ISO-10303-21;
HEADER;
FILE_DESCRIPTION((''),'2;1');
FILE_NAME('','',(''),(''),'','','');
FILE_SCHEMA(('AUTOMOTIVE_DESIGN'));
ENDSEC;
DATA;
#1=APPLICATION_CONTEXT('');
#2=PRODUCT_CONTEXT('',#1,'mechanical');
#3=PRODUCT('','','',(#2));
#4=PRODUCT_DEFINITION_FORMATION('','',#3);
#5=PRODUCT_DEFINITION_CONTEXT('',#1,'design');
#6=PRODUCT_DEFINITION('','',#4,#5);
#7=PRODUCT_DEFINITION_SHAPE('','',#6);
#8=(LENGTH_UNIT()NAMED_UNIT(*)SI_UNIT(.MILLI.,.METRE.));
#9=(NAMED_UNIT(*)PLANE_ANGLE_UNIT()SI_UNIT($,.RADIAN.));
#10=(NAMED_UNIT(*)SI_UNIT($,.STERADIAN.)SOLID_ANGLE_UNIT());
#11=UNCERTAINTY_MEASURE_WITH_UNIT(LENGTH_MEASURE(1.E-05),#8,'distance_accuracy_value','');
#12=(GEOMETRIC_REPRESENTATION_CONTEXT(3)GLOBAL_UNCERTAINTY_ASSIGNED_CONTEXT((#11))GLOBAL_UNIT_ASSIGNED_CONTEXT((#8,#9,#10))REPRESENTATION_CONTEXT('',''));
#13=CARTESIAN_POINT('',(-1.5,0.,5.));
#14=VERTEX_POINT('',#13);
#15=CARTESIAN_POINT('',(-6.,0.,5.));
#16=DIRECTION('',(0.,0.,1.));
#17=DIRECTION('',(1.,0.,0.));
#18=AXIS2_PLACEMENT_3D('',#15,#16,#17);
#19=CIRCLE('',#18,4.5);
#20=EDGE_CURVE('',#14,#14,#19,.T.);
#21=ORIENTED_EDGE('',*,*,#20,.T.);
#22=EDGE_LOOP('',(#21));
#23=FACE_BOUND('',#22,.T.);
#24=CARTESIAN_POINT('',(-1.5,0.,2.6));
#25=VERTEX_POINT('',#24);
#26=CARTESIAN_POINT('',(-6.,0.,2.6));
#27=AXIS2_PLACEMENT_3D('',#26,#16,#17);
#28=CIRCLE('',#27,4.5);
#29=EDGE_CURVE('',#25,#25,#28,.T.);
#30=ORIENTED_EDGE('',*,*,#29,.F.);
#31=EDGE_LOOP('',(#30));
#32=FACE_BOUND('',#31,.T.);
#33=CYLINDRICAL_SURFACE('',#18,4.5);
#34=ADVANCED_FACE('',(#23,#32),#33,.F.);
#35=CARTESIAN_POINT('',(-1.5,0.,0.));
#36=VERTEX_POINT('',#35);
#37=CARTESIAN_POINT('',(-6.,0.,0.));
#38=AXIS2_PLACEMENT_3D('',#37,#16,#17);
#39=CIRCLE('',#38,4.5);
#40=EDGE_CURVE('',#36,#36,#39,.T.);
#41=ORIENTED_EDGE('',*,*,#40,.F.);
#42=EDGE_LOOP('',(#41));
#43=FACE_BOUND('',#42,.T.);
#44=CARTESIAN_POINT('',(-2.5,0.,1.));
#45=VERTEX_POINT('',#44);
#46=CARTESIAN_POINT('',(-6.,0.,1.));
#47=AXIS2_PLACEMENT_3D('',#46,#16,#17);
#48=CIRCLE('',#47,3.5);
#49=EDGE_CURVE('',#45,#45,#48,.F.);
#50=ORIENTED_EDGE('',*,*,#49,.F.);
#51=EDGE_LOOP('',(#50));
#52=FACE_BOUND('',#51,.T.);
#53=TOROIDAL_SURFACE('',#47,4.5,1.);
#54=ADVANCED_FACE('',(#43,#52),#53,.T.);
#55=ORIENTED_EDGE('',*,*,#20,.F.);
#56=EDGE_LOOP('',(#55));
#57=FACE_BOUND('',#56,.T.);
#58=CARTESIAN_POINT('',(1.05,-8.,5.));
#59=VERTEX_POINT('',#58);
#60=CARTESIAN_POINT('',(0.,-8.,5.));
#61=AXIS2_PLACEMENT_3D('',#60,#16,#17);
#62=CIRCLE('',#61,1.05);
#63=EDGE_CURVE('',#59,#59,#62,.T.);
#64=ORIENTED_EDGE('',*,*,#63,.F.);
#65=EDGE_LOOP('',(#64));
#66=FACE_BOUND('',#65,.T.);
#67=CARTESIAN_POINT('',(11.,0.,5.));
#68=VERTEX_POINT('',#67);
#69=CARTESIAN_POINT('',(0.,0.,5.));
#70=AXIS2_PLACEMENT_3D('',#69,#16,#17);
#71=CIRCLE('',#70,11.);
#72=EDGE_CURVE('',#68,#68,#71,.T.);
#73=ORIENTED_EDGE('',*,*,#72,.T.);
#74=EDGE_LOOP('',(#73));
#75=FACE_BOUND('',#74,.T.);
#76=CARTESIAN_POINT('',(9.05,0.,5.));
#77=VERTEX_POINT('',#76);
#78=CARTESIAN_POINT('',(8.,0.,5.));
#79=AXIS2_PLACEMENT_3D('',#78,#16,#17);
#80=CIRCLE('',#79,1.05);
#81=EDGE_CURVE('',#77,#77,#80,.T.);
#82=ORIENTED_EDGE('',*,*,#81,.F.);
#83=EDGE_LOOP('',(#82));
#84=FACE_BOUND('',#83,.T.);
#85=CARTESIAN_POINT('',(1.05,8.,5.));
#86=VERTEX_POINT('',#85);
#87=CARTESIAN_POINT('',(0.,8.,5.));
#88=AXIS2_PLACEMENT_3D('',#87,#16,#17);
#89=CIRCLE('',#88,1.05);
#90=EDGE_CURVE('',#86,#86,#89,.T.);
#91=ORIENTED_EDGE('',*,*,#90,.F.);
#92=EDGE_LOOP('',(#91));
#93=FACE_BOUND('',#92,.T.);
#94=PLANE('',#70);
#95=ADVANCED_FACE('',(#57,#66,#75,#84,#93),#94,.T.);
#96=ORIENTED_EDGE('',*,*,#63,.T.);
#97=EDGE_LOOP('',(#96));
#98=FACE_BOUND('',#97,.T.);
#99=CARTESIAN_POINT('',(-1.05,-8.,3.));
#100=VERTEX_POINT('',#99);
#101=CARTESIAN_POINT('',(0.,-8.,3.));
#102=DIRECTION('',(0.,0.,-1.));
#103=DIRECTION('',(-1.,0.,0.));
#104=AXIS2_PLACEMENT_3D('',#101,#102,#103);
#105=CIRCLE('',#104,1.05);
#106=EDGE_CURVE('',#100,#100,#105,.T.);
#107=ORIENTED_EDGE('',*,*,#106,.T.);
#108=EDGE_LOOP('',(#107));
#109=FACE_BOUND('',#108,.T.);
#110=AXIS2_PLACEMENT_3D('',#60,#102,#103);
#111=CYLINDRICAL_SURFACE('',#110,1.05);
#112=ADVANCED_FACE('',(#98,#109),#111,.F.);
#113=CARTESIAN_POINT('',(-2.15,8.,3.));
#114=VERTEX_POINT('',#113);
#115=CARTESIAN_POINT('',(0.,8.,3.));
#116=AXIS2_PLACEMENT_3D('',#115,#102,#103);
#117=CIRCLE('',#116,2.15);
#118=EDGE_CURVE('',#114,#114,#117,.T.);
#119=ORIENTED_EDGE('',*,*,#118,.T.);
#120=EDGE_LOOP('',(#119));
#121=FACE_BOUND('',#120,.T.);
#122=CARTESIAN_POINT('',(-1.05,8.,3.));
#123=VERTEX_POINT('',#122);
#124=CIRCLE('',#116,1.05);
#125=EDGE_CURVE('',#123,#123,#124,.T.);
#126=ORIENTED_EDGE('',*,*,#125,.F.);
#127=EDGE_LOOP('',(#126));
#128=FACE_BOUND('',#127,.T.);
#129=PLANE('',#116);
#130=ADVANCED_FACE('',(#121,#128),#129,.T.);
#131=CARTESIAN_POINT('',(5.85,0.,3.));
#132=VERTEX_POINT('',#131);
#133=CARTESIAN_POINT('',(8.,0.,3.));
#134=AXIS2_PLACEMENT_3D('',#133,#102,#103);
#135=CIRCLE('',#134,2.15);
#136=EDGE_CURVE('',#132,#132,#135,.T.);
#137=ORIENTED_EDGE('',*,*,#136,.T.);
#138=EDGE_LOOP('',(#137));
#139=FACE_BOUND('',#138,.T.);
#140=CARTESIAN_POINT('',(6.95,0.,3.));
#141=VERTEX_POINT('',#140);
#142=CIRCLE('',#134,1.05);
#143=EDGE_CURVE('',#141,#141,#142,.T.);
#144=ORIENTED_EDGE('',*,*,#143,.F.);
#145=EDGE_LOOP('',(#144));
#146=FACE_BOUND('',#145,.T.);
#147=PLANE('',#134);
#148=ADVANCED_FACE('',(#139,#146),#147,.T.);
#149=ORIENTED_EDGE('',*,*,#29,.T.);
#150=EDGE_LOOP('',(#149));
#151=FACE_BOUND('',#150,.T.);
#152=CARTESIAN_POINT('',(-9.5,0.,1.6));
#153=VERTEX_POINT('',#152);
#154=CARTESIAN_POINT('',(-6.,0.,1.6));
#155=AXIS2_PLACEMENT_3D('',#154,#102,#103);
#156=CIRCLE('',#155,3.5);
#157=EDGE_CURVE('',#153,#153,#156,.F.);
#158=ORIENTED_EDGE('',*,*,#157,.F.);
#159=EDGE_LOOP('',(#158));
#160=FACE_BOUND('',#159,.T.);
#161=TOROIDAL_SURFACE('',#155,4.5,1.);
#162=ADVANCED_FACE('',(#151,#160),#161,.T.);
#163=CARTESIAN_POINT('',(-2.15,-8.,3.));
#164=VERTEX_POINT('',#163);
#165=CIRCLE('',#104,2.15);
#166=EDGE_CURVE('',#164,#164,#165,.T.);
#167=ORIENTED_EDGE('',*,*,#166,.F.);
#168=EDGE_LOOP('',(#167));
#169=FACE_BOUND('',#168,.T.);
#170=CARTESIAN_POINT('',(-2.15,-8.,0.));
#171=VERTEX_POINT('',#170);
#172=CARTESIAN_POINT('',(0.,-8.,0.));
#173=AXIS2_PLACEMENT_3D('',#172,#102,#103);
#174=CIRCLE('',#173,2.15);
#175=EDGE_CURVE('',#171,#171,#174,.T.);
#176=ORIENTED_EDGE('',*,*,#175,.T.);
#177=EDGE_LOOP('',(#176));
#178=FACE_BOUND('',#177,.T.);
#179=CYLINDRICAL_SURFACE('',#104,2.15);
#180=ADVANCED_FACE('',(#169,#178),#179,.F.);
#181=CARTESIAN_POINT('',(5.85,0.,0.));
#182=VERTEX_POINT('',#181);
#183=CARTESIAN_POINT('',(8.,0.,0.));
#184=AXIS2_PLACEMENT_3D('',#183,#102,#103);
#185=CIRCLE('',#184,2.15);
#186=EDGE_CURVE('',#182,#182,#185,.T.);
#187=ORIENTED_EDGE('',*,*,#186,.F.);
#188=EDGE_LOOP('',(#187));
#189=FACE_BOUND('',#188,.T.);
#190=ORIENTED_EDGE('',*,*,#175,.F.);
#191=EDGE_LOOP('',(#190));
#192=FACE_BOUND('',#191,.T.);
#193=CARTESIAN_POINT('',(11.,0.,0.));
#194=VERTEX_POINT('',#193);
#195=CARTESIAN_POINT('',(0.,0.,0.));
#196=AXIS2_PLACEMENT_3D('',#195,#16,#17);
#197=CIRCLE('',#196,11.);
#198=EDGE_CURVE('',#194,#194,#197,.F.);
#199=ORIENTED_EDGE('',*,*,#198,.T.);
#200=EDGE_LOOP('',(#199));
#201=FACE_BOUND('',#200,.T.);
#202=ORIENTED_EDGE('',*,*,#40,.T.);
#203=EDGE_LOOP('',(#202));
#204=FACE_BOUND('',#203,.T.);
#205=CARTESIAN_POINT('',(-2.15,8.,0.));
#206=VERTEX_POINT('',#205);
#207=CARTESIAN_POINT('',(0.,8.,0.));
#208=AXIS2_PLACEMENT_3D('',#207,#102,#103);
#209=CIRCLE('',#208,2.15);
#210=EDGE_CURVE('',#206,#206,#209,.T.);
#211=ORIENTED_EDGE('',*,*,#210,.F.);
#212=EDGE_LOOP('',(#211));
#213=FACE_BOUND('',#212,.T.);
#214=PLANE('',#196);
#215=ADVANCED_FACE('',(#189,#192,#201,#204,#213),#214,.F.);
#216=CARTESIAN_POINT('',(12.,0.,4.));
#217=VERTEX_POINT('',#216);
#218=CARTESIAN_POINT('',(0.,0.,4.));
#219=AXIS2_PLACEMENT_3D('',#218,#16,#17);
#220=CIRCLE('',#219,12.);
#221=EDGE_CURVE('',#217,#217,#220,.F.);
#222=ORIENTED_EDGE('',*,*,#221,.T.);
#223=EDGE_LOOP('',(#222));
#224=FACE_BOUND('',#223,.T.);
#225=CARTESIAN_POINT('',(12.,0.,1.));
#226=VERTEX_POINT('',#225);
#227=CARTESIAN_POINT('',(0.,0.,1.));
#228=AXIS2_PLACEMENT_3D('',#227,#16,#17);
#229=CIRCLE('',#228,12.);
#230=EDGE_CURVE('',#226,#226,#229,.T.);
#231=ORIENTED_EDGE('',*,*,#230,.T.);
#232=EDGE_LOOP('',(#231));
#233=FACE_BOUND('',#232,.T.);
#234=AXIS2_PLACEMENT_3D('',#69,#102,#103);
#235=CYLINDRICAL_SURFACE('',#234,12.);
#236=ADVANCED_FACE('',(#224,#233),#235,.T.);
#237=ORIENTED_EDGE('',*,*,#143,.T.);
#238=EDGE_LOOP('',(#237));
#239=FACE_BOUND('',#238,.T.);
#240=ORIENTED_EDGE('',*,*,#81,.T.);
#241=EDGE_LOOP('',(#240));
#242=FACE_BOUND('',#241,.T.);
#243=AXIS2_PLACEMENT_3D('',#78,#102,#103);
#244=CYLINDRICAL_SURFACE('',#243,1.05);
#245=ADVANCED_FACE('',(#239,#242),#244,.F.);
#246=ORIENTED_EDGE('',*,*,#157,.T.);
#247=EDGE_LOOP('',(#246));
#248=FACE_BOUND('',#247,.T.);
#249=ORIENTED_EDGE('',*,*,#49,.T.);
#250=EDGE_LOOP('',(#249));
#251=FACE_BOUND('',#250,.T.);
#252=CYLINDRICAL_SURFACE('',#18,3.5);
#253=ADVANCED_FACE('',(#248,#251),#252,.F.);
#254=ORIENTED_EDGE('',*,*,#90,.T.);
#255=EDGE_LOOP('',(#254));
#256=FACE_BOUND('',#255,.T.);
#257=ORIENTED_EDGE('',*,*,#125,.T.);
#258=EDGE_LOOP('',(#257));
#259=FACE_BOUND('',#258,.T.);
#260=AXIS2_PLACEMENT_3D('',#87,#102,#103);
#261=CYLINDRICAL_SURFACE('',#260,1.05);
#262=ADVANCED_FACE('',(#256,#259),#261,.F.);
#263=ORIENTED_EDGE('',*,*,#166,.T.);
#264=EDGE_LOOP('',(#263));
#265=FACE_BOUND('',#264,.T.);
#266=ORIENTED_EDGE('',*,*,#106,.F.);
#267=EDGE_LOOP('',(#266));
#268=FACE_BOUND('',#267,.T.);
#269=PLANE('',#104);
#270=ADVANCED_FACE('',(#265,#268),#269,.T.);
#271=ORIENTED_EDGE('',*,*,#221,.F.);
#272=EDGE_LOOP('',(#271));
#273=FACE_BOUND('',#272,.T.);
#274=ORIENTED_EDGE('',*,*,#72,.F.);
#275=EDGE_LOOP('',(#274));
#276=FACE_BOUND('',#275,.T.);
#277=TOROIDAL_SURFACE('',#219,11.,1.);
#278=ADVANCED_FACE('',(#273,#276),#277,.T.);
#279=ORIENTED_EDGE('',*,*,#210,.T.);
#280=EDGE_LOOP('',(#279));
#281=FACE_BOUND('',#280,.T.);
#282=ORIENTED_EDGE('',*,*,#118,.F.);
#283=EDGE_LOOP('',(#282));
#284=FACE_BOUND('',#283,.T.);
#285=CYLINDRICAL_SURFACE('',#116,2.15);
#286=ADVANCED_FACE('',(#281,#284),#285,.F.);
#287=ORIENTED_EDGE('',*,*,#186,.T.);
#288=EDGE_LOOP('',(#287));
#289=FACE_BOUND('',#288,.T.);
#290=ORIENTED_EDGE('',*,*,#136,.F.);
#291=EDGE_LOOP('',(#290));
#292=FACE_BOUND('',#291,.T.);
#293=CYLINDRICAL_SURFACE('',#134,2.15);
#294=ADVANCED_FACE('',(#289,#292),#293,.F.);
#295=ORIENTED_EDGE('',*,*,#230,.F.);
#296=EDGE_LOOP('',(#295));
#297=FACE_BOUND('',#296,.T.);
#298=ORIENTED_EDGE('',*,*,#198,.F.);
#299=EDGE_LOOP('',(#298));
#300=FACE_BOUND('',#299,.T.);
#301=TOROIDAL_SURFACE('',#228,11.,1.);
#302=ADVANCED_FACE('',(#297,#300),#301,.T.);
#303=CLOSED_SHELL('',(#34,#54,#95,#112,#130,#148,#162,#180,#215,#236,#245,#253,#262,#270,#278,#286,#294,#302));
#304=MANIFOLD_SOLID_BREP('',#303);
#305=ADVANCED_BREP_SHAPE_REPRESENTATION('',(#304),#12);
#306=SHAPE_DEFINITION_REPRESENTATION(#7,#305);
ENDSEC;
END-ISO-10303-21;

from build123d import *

# Parameters (mm, degrees)
SKETCH1_R           = 12
SKETCH1_R_2         = 1.05
BOSS_EXTRUDE1_DEPTH = 5
HOLE2_D             = 7
HOLE2_DEPTH         = 8
HOLE2_CBORE_D       = 9
HOLE2_CBORE_DEPTH   = 2.4
SKETCH8_R           = 2.15
CUT_EXTRUDE1_DEPTH  = 3
FILLET1_R           = 1
FILLET2_R           = 1


with BuildPart() as part:
    # Sketch1 → Boss-Extrude1 (new body)
    with BuildSketch(Plane.XY):
        Circle(SKETCH1_R)
        with Locations((0, 8)):
            Circle(SKETCH1_R_2, mode=Mode.SUBTRACT)
        with Locations((8, 0)):
            Circle(SKETCH1_R_2, mode=Mode.SUBTRACT)
        with Locations((0, -8)):
            Circle(SKETCH1_R_2, mode=Mode.SUBTRACT)
    extrude(amount=BOSS_EXTRUDE1_DEPTH)

    # Hole2
    with Locations(Plane.XY.offset(5)):
        with Locations((-6, 0)):
            CounterBoreHole(HOLE2_D / 2, HOLE2_CBORE_D / 2, HOLE2_CBORE_DEPTH, depth=HOLE2_DEPTH)

    # Sketch8 → Cut-Extrude1 (cut)
    with BuildSketch(Plane(origin=(0, 0, 0), x_dir=(-1, 0, 0), z_dir=(0, 0, -1))):
        with Locations((0, 8)):
            Circle(SKETCH8_R)
        with Locations((0, -8)):
            Circle(SKETCH8_R)
        with Locations((-8, 0)):
            Circle(SKETCH8_R)
    extrude(amount=-CUT_EXTRUDE1_DEPTH, mode=Mode.SUBTRACT)

    # Fillet1
    fillet1_edges = [part.edges().sort_by_distance(p)[0] for p in [
        (-2.5, 0, 0),
        (-2.5, 0, 2.6),
    ]]
    fillet(fillet1_edges, radius=FILLET1_R - 0.0001)  # a hair under: the kernel refuses the full size

    # Fillet2
    fillet2_edges = [part.edges().sort_by_distance(p)[0] for p in [
        (-12, 0, 0),
        (-12, 0, 5),
    ]]
    fillet(fillet2_edges, radius=FILLET2_R)


solid = part.part
